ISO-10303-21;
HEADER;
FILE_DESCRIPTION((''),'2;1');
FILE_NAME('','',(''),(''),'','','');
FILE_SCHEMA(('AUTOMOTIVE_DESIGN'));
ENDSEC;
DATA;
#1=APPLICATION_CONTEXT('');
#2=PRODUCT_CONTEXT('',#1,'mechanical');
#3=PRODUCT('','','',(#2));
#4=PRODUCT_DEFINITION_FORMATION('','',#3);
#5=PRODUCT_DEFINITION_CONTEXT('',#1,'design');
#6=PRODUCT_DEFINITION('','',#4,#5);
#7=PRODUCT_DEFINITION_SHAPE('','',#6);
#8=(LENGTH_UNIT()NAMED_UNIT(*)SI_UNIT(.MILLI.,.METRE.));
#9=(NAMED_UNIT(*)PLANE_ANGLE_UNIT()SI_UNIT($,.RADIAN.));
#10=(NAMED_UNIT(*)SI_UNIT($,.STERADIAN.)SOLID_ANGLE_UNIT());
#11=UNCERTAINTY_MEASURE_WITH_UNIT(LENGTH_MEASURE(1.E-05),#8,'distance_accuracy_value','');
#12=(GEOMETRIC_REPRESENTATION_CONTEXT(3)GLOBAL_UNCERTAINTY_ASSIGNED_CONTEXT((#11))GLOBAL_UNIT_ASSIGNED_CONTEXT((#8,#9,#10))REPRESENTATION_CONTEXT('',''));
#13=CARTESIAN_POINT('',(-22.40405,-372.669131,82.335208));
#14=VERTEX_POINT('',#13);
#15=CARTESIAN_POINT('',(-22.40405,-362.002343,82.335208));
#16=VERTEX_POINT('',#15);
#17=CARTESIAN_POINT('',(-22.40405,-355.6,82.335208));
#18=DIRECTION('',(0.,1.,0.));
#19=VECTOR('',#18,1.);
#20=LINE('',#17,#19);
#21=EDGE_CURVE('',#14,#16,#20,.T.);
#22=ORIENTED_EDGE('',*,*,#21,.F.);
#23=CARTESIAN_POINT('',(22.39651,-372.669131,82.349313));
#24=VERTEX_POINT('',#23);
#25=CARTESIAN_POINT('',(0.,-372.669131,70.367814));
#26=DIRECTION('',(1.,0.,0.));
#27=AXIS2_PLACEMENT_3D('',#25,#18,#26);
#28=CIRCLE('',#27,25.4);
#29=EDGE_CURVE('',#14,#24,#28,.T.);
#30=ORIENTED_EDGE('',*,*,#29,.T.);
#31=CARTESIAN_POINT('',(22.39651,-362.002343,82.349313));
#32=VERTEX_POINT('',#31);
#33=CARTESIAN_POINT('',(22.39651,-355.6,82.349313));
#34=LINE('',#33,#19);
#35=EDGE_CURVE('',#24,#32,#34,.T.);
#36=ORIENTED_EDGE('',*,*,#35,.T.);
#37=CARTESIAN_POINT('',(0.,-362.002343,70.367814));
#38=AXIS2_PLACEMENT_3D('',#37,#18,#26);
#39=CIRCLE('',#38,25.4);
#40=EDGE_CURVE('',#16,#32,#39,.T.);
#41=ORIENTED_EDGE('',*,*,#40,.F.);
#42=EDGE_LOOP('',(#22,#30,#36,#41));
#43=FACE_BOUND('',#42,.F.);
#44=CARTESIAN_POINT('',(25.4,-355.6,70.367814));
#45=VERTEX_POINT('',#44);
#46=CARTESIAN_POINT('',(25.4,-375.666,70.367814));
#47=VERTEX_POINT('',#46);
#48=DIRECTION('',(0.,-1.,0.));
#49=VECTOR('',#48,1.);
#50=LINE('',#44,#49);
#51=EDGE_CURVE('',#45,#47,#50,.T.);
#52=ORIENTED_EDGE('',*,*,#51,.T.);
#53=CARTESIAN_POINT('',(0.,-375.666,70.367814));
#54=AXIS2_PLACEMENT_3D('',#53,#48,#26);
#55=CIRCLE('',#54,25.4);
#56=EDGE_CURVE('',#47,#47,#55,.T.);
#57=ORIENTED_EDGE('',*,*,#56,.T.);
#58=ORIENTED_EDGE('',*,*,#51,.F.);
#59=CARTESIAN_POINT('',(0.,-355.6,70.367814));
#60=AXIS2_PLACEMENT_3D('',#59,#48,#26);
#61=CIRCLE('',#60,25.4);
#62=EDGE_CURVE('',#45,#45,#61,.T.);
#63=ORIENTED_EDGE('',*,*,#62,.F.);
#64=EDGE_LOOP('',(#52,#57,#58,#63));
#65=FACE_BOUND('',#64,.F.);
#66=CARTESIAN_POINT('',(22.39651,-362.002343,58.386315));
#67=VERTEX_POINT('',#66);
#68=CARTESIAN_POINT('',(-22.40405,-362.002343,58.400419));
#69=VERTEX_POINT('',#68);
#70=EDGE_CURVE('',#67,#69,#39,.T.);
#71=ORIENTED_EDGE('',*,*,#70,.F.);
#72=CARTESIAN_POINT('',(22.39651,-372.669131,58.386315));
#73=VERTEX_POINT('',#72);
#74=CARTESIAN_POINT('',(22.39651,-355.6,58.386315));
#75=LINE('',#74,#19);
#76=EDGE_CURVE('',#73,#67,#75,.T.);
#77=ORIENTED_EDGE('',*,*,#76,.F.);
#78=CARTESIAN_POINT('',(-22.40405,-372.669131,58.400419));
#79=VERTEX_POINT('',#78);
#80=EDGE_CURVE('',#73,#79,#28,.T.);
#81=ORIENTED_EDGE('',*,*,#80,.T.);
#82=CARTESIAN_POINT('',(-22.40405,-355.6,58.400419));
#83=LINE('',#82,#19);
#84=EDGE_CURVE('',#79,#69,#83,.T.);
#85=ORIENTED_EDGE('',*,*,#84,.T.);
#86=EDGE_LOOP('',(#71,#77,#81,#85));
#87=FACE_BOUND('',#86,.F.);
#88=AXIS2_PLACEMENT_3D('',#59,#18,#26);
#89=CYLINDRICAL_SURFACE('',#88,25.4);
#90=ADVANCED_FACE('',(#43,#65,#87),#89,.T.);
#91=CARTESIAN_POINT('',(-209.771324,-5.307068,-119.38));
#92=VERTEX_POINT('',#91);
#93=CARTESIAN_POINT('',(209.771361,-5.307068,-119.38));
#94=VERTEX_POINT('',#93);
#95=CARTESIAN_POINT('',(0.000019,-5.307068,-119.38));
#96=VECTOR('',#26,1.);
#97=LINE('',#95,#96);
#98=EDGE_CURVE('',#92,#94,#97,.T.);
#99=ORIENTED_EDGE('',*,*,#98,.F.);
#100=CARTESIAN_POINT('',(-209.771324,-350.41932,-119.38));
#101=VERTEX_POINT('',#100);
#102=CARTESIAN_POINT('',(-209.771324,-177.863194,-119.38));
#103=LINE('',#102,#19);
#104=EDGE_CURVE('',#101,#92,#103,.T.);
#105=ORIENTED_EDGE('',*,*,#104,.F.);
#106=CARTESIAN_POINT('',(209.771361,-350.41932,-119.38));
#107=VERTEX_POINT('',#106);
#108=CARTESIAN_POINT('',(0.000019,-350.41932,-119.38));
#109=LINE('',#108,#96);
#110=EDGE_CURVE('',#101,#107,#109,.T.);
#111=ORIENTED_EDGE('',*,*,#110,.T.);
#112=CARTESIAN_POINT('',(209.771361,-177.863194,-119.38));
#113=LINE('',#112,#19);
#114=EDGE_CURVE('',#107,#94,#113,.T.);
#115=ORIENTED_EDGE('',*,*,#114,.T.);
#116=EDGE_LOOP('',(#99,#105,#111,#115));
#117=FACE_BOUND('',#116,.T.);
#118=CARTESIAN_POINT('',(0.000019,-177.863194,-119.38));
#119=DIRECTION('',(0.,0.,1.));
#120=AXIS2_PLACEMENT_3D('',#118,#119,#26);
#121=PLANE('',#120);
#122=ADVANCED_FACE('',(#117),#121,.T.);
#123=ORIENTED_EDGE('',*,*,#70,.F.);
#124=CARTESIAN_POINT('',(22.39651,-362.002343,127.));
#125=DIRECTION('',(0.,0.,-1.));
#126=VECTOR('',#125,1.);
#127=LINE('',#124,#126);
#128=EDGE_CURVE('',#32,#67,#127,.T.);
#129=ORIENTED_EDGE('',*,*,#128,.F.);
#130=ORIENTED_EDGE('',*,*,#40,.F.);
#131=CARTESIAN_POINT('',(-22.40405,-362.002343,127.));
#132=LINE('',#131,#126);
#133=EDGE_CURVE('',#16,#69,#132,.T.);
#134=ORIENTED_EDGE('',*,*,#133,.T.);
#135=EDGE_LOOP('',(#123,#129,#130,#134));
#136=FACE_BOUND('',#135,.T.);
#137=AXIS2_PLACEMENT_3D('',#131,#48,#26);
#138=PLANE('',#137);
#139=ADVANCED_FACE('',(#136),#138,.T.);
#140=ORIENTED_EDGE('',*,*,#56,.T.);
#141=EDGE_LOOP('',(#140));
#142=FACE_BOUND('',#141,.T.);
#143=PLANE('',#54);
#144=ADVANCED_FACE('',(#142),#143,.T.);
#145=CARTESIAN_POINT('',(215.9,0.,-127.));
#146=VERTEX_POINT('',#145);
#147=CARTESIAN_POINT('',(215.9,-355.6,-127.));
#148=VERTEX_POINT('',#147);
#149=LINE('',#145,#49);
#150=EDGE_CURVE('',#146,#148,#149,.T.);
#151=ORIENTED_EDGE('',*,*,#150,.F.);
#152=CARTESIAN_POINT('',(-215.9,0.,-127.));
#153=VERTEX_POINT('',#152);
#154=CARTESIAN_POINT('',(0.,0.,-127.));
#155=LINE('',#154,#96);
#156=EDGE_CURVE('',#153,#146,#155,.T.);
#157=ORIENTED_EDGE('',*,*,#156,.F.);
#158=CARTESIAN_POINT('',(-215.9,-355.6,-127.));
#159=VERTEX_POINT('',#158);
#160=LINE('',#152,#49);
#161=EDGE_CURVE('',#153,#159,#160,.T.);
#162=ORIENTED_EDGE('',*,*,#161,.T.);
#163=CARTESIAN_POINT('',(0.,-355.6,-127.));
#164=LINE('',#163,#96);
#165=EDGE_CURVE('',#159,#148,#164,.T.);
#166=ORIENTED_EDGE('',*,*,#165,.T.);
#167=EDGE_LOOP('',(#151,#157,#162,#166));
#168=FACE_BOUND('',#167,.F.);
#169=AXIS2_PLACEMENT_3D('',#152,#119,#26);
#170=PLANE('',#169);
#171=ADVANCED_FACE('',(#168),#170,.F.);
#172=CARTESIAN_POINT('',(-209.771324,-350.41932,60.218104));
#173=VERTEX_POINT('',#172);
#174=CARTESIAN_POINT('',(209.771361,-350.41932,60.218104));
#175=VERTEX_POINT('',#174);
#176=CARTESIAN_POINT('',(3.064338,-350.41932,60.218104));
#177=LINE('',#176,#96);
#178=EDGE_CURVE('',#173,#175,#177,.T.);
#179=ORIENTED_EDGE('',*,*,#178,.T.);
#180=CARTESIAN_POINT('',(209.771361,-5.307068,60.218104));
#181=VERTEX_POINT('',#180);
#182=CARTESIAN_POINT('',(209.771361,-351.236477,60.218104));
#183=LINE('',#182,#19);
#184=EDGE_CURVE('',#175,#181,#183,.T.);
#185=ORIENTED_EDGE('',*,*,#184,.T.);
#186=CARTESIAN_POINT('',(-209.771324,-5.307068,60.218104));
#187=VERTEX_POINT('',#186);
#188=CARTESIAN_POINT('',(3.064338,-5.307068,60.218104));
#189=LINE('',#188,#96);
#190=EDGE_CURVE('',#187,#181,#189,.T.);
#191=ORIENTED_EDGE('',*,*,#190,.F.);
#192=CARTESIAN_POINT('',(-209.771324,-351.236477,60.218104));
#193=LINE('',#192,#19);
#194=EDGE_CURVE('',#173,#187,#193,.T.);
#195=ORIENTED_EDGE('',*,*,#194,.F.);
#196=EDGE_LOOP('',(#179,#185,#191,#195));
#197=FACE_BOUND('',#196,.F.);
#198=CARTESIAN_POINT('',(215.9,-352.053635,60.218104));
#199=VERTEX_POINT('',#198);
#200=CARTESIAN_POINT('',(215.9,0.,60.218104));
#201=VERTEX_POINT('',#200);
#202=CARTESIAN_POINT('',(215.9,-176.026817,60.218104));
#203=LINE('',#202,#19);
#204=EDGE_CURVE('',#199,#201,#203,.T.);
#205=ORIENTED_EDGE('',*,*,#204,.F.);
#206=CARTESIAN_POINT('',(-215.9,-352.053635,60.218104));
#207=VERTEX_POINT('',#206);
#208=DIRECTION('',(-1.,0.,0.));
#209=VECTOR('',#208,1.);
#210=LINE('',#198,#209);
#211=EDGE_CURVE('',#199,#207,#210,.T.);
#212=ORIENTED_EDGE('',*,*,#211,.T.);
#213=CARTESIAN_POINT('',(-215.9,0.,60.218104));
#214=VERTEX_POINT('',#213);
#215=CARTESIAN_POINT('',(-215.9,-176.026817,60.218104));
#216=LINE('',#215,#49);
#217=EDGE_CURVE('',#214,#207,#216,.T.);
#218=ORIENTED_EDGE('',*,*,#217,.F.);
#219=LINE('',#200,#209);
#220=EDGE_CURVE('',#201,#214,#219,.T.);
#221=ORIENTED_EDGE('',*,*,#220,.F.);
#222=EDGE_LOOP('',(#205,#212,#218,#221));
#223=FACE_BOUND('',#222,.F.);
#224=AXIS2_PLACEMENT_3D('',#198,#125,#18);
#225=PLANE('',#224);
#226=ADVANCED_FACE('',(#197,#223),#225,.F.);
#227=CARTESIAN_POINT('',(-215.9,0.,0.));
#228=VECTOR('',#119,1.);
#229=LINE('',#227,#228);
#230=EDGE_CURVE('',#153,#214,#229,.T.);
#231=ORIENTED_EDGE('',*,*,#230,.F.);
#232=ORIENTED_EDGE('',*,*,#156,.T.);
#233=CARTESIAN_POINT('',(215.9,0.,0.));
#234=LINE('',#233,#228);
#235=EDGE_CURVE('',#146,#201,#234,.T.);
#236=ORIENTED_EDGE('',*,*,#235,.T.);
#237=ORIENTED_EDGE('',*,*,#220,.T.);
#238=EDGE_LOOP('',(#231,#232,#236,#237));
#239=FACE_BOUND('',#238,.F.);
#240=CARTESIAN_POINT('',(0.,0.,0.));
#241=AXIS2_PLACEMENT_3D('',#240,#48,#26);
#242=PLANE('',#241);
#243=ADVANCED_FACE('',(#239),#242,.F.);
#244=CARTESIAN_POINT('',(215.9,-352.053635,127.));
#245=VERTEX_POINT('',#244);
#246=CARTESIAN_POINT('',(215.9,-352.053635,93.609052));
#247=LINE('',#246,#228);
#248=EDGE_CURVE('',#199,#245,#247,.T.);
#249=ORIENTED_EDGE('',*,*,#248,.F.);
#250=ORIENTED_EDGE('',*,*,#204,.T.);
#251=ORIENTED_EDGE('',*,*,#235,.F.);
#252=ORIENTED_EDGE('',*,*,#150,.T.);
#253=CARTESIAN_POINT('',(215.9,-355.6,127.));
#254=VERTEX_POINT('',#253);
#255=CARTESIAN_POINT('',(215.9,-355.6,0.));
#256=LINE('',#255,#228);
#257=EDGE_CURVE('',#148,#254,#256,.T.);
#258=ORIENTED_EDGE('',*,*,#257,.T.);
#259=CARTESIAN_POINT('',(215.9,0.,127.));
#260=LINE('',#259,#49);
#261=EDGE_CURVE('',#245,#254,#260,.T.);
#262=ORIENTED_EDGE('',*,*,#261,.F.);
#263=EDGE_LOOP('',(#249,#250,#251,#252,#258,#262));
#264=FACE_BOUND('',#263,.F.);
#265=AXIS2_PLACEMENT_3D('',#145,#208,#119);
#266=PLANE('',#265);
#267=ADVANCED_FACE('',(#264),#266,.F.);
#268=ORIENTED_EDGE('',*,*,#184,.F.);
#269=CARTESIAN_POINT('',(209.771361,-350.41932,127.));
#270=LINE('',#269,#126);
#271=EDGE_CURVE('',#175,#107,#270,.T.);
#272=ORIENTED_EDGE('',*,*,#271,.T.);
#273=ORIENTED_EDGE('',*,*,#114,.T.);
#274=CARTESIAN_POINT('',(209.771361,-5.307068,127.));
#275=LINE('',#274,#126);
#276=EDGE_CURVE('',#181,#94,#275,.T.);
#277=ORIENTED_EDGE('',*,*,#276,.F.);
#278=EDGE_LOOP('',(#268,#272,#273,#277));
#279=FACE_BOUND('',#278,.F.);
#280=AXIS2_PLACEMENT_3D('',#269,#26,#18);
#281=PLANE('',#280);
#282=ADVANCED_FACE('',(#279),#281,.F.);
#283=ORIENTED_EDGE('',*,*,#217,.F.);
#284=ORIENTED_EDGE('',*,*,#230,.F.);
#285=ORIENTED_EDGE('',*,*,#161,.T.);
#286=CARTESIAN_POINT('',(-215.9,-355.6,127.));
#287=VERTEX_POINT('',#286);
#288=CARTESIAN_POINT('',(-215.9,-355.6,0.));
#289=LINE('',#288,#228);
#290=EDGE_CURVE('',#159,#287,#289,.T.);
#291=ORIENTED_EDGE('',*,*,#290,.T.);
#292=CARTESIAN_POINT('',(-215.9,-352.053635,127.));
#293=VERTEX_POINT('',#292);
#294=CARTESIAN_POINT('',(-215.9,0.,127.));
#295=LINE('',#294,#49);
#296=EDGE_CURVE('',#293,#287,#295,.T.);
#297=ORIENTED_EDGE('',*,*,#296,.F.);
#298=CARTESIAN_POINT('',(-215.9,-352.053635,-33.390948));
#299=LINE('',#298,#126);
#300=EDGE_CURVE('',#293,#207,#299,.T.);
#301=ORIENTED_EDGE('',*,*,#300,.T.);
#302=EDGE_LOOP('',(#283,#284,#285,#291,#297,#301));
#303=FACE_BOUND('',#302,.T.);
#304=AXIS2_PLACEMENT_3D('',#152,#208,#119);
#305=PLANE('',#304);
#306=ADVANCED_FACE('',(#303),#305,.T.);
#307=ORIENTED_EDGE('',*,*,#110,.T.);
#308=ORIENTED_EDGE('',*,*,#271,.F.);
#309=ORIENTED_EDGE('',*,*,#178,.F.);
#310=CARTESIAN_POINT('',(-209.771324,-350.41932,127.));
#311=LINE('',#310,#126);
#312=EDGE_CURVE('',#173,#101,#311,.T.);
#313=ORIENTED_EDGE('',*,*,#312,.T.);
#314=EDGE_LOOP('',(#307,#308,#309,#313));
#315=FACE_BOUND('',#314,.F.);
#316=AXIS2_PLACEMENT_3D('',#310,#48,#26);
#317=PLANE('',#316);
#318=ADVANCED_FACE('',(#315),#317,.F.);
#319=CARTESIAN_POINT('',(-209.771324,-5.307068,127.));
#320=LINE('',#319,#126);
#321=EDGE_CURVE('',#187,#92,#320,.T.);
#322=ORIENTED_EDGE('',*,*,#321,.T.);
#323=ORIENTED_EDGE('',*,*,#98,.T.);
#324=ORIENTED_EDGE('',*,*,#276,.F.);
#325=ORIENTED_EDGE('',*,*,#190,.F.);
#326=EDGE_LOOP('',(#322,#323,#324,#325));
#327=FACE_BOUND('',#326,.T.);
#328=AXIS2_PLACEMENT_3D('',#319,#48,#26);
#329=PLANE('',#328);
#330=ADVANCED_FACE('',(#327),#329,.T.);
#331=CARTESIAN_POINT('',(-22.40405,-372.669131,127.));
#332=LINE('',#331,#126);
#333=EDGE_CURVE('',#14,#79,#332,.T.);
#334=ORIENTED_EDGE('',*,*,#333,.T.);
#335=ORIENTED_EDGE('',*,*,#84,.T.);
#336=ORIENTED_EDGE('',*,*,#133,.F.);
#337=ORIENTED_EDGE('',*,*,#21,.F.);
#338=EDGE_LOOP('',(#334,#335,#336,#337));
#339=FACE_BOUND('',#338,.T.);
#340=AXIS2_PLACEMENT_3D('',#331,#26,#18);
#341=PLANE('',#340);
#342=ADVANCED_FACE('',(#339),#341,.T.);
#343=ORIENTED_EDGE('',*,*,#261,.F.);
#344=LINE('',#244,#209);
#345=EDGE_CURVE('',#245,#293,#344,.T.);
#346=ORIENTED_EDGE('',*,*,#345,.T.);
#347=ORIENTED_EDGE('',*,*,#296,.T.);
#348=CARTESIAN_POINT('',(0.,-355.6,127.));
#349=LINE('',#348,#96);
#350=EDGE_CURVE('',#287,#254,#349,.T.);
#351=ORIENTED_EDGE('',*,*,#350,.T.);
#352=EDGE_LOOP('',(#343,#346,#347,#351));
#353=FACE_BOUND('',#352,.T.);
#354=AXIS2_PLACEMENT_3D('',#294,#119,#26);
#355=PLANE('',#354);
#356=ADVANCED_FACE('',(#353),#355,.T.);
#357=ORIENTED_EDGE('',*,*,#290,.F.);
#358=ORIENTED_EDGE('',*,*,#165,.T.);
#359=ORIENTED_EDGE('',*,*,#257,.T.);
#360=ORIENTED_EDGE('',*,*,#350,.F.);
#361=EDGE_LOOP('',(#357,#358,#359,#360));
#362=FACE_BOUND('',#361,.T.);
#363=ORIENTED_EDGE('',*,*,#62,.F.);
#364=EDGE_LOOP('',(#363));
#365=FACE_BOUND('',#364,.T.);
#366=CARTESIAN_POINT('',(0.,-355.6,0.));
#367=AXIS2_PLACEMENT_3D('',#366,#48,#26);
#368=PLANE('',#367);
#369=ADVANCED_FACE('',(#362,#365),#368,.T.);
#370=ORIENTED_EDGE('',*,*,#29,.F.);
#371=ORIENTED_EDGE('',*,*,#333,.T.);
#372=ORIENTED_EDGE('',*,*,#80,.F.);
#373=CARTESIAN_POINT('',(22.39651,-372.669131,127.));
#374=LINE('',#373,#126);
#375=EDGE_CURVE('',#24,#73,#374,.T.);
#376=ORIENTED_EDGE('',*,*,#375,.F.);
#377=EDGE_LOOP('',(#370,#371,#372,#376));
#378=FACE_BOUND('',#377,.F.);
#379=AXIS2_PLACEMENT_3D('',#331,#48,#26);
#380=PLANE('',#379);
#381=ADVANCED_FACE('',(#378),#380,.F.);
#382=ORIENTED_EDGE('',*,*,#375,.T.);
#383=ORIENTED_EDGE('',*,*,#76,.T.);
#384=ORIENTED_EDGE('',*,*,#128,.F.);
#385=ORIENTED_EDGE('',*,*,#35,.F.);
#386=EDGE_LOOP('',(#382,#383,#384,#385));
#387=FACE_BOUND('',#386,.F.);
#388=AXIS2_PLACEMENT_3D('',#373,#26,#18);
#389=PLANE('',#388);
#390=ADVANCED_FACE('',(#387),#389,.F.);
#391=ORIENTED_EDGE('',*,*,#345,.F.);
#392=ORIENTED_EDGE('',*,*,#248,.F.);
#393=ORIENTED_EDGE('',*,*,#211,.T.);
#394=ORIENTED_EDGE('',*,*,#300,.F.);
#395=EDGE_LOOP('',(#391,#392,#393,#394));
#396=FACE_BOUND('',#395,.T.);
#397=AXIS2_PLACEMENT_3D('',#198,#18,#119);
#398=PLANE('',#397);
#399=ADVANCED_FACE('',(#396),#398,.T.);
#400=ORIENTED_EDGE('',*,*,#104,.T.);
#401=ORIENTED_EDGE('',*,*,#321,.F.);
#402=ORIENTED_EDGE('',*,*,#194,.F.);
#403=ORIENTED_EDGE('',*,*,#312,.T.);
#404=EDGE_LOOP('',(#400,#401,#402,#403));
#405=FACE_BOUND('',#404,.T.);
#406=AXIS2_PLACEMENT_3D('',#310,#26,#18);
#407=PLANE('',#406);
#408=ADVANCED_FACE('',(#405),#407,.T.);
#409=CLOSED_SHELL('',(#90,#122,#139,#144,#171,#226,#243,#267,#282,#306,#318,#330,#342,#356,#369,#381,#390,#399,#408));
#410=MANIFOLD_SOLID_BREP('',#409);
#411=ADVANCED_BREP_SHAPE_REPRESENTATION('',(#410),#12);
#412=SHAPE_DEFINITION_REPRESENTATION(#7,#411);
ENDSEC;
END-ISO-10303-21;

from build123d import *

# Parameters (mm, degrees)
F0_W      = 431.8
F0_H      = 254
F1_DEPTH  = 355.6
F2_W      = 419.5426851511
F2_H      = 345.1122520491
F3_DEPTH  = 246.38
F5_R      = 25.4
F6_DEPTH  = 20.066
F7_W      = 352.0536348224
F7_H      = 66.7818960792
F8_DEPTH  = 431.801
F9_W      = 44.8005609214
F9_H      = 10.6667876244
F10_DEPTH = 254.001


# Not quite as in the source:
# - a feature names something its author has since deleted; it is built from what else it names


with BuildPart() as f1:
    # F0 (on Front) → F1 (new body)
    with BuildSketch(Plane.XZ):
        Rectangle(F0_W, F0_H)
    extrude(amount=F1_DEPTH)

    # F2 (on face) → F3 (cut)
    with BuildSketch(Plane.XY.offset(127)):
        with Locations((1.86265e-05, -177.8631941415)):
            Rectangle(F2_W, F2_H)
    extrude(amount=-F3_DEPTH, mode=Mode.SUBTRACT)

    # F5 (on face) → F6 (join)
    with BuildSketch(Plane.XZ.offset(355.6)):
        with Locations((0, 70.3678135578)):
            Circle(F5_R)
    extrude(amount=F6_DEPTH)

    # F7 (on face) → F8 (cut, through all)
    with BuildSketch(Plane.YZ.offset(215.9)):
        with Locations((-176.0268174112, 93.6090519604)):
            Rectangle(F7_W, F7_H)
    extrude(amount=-F8_DEPTH, mode=Mode.SUBTRACT)

    # F9 (on face) → F10 (cut, through all)
    with BuildSketch(Plane.XY.offset(127)):
        with Locations((-0.0037699938, -367.3357367516)):
            Rectangle(F9_W, F9_H)
    extrude(amount=-F10_DEPTH, mode=Mode.SUBTRACT)


solid = f1.part
